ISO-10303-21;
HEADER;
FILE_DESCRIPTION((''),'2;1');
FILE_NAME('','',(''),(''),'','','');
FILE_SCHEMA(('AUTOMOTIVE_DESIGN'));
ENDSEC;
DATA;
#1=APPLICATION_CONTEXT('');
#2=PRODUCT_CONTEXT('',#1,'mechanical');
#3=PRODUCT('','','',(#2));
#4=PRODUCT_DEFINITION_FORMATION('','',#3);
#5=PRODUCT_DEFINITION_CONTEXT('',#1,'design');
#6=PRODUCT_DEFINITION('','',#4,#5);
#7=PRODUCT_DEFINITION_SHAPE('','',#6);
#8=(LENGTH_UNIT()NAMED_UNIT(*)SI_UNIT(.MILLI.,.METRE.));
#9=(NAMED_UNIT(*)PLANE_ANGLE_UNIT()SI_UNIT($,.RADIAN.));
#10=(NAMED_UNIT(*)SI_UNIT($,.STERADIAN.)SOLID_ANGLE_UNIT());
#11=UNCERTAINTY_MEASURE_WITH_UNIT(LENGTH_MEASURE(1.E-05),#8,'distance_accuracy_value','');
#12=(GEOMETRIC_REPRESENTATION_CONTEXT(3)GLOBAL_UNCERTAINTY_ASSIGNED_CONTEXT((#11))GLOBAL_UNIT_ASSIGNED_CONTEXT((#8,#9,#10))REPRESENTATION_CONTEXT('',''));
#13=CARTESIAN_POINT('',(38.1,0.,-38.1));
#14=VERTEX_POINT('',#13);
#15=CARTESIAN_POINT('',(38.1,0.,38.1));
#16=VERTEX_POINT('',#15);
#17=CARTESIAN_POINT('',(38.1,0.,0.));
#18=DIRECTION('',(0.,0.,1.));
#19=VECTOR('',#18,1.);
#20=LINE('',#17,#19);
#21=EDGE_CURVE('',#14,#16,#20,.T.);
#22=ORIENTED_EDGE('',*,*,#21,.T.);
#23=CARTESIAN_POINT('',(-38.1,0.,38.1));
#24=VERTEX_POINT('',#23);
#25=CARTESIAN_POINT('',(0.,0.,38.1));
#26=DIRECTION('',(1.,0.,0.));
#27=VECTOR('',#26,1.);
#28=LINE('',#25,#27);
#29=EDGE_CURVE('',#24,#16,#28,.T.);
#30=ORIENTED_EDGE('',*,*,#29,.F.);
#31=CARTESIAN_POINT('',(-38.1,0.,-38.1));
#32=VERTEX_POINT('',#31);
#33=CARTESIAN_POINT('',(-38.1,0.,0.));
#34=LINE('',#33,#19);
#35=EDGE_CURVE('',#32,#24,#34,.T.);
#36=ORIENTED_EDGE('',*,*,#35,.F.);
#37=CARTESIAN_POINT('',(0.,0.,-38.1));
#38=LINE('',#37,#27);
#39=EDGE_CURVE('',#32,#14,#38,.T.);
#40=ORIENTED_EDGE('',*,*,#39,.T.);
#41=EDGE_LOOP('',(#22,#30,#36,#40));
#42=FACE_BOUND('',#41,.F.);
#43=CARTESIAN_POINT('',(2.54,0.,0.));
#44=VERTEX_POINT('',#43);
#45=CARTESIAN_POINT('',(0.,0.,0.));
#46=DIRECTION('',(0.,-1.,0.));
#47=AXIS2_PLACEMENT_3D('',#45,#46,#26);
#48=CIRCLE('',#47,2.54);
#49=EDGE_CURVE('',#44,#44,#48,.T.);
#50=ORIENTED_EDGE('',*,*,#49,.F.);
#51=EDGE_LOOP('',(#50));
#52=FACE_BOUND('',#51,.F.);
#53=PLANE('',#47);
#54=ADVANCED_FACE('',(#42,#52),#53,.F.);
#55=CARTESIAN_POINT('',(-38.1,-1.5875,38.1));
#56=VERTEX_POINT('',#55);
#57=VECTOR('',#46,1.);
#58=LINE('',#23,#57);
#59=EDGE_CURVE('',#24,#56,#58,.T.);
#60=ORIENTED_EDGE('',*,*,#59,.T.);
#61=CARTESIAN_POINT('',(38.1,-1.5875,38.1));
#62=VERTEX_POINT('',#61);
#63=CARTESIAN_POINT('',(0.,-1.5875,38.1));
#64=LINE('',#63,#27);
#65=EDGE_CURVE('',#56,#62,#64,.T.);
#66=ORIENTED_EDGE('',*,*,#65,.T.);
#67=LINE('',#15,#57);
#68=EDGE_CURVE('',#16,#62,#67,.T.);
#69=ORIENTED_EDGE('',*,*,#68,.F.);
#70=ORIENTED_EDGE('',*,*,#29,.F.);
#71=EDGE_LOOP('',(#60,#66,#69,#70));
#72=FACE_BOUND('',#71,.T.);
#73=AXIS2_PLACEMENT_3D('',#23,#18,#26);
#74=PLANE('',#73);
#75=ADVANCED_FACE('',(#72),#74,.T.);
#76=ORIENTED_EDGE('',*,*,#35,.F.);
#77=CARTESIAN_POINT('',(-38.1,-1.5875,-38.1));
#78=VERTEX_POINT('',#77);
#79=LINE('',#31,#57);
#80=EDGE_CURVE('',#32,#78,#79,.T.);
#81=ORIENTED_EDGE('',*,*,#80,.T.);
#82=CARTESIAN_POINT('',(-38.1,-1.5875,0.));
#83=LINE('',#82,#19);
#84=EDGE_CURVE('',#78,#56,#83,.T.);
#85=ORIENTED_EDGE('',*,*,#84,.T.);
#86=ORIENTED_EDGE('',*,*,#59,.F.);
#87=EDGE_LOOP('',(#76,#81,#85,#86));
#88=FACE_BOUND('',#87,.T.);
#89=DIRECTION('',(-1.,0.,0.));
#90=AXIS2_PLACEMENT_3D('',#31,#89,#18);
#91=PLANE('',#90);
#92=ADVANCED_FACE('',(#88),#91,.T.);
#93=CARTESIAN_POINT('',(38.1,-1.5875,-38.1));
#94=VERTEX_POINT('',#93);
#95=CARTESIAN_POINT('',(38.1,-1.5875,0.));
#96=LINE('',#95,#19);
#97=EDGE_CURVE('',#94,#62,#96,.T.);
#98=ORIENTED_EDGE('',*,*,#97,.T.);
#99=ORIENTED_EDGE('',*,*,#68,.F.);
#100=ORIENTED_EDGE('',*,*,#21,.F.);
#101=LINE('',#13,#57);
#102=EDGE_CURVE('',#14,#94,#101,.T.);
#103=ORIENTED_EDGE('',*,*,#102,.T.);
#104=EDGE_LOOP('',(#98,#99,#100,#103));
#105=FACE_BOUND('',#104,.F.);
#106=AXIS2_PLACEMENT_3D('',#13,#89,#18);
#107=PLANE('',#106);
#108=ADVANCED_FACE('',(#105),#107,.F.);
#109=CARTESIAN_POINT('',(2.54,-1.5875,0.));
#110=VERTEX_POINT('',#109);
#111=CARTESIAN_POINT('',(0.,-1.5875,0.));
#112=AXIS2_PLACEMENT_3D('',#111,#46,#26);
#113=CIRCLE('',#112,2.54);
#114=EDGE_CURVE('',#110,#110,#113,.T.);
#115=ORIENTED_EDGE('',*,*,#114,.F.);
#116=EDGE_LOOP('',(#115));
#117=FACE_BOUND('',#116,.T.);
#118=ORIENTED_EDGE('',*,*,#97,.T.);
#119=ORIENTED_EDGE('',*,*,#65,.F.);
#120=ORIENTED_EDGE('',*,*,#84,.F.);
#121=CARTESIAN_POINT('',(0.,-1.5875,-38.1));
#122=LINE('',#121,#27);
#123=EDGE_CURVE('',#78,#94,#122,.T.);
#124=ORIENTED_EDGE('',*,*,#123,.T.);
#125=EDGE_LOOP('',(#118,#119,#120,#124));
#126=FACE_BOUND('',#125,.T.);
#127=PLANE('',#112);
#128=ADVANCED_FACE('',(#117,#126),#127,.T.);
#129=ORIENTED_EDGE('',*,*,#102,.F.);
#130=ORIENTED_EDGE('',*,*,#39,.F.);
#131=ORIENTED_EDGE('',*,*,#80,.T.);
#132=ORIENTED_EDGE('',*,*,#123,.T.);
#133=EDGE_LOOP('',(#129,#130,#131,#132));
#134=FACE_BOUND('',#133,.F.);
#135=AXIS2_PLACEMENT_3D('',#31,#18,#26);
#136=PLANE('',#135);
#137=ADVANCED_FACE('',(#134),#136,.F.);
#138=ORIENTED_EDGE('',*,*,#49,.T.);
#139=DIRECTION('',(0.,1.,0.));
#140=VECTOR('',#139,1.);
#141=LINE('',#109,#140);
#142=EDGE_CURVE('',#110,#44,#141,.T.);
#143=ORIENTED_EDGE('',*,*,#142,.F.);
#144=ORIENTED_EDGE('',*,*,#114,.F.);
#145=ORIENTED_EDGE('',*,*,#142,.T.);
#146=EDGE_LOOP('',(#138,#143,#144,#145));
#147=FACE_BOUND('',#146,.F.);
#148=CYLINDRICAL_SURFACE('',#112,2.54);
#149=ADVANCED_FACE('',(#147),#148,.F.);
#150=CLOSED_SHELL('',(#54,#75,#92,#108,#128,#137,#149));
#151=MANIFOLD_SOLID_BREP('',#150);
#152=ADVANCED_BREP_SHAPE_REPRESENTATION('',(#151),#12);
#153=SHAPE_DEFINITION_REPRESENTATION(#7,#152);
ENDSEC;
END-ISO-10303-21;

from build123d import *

# Parameters (mm, degrees)
F0_W     = 76.2
F0_H     = 76.2
F1_DEPTH = 1.5875
F2_R     = 2.54
F3_DEPTH = 25.4


# Not quite as in the source:
# - a length typed as a fraction of an inch, garbled in the dataset ("3 / 203.2 mm" for 3/8 in), is restored


with BuildPart() as f1:
    # F0 (on Front) → F1 (new body)
    with BuildSketch(Plane.XZ):
        Rectangle(F0_W, F0_H)
    extrude(amount=F1_DEPTH)

    # F2 (on face) → F3 (cut)
    with BuildSketch(Plane.XZ.offset(1.5875)):
        Circle(F2_R)
    extrude(amount=-F3_DEPTH, mode=Mode.SUBTRACT)


solid = f1.part
